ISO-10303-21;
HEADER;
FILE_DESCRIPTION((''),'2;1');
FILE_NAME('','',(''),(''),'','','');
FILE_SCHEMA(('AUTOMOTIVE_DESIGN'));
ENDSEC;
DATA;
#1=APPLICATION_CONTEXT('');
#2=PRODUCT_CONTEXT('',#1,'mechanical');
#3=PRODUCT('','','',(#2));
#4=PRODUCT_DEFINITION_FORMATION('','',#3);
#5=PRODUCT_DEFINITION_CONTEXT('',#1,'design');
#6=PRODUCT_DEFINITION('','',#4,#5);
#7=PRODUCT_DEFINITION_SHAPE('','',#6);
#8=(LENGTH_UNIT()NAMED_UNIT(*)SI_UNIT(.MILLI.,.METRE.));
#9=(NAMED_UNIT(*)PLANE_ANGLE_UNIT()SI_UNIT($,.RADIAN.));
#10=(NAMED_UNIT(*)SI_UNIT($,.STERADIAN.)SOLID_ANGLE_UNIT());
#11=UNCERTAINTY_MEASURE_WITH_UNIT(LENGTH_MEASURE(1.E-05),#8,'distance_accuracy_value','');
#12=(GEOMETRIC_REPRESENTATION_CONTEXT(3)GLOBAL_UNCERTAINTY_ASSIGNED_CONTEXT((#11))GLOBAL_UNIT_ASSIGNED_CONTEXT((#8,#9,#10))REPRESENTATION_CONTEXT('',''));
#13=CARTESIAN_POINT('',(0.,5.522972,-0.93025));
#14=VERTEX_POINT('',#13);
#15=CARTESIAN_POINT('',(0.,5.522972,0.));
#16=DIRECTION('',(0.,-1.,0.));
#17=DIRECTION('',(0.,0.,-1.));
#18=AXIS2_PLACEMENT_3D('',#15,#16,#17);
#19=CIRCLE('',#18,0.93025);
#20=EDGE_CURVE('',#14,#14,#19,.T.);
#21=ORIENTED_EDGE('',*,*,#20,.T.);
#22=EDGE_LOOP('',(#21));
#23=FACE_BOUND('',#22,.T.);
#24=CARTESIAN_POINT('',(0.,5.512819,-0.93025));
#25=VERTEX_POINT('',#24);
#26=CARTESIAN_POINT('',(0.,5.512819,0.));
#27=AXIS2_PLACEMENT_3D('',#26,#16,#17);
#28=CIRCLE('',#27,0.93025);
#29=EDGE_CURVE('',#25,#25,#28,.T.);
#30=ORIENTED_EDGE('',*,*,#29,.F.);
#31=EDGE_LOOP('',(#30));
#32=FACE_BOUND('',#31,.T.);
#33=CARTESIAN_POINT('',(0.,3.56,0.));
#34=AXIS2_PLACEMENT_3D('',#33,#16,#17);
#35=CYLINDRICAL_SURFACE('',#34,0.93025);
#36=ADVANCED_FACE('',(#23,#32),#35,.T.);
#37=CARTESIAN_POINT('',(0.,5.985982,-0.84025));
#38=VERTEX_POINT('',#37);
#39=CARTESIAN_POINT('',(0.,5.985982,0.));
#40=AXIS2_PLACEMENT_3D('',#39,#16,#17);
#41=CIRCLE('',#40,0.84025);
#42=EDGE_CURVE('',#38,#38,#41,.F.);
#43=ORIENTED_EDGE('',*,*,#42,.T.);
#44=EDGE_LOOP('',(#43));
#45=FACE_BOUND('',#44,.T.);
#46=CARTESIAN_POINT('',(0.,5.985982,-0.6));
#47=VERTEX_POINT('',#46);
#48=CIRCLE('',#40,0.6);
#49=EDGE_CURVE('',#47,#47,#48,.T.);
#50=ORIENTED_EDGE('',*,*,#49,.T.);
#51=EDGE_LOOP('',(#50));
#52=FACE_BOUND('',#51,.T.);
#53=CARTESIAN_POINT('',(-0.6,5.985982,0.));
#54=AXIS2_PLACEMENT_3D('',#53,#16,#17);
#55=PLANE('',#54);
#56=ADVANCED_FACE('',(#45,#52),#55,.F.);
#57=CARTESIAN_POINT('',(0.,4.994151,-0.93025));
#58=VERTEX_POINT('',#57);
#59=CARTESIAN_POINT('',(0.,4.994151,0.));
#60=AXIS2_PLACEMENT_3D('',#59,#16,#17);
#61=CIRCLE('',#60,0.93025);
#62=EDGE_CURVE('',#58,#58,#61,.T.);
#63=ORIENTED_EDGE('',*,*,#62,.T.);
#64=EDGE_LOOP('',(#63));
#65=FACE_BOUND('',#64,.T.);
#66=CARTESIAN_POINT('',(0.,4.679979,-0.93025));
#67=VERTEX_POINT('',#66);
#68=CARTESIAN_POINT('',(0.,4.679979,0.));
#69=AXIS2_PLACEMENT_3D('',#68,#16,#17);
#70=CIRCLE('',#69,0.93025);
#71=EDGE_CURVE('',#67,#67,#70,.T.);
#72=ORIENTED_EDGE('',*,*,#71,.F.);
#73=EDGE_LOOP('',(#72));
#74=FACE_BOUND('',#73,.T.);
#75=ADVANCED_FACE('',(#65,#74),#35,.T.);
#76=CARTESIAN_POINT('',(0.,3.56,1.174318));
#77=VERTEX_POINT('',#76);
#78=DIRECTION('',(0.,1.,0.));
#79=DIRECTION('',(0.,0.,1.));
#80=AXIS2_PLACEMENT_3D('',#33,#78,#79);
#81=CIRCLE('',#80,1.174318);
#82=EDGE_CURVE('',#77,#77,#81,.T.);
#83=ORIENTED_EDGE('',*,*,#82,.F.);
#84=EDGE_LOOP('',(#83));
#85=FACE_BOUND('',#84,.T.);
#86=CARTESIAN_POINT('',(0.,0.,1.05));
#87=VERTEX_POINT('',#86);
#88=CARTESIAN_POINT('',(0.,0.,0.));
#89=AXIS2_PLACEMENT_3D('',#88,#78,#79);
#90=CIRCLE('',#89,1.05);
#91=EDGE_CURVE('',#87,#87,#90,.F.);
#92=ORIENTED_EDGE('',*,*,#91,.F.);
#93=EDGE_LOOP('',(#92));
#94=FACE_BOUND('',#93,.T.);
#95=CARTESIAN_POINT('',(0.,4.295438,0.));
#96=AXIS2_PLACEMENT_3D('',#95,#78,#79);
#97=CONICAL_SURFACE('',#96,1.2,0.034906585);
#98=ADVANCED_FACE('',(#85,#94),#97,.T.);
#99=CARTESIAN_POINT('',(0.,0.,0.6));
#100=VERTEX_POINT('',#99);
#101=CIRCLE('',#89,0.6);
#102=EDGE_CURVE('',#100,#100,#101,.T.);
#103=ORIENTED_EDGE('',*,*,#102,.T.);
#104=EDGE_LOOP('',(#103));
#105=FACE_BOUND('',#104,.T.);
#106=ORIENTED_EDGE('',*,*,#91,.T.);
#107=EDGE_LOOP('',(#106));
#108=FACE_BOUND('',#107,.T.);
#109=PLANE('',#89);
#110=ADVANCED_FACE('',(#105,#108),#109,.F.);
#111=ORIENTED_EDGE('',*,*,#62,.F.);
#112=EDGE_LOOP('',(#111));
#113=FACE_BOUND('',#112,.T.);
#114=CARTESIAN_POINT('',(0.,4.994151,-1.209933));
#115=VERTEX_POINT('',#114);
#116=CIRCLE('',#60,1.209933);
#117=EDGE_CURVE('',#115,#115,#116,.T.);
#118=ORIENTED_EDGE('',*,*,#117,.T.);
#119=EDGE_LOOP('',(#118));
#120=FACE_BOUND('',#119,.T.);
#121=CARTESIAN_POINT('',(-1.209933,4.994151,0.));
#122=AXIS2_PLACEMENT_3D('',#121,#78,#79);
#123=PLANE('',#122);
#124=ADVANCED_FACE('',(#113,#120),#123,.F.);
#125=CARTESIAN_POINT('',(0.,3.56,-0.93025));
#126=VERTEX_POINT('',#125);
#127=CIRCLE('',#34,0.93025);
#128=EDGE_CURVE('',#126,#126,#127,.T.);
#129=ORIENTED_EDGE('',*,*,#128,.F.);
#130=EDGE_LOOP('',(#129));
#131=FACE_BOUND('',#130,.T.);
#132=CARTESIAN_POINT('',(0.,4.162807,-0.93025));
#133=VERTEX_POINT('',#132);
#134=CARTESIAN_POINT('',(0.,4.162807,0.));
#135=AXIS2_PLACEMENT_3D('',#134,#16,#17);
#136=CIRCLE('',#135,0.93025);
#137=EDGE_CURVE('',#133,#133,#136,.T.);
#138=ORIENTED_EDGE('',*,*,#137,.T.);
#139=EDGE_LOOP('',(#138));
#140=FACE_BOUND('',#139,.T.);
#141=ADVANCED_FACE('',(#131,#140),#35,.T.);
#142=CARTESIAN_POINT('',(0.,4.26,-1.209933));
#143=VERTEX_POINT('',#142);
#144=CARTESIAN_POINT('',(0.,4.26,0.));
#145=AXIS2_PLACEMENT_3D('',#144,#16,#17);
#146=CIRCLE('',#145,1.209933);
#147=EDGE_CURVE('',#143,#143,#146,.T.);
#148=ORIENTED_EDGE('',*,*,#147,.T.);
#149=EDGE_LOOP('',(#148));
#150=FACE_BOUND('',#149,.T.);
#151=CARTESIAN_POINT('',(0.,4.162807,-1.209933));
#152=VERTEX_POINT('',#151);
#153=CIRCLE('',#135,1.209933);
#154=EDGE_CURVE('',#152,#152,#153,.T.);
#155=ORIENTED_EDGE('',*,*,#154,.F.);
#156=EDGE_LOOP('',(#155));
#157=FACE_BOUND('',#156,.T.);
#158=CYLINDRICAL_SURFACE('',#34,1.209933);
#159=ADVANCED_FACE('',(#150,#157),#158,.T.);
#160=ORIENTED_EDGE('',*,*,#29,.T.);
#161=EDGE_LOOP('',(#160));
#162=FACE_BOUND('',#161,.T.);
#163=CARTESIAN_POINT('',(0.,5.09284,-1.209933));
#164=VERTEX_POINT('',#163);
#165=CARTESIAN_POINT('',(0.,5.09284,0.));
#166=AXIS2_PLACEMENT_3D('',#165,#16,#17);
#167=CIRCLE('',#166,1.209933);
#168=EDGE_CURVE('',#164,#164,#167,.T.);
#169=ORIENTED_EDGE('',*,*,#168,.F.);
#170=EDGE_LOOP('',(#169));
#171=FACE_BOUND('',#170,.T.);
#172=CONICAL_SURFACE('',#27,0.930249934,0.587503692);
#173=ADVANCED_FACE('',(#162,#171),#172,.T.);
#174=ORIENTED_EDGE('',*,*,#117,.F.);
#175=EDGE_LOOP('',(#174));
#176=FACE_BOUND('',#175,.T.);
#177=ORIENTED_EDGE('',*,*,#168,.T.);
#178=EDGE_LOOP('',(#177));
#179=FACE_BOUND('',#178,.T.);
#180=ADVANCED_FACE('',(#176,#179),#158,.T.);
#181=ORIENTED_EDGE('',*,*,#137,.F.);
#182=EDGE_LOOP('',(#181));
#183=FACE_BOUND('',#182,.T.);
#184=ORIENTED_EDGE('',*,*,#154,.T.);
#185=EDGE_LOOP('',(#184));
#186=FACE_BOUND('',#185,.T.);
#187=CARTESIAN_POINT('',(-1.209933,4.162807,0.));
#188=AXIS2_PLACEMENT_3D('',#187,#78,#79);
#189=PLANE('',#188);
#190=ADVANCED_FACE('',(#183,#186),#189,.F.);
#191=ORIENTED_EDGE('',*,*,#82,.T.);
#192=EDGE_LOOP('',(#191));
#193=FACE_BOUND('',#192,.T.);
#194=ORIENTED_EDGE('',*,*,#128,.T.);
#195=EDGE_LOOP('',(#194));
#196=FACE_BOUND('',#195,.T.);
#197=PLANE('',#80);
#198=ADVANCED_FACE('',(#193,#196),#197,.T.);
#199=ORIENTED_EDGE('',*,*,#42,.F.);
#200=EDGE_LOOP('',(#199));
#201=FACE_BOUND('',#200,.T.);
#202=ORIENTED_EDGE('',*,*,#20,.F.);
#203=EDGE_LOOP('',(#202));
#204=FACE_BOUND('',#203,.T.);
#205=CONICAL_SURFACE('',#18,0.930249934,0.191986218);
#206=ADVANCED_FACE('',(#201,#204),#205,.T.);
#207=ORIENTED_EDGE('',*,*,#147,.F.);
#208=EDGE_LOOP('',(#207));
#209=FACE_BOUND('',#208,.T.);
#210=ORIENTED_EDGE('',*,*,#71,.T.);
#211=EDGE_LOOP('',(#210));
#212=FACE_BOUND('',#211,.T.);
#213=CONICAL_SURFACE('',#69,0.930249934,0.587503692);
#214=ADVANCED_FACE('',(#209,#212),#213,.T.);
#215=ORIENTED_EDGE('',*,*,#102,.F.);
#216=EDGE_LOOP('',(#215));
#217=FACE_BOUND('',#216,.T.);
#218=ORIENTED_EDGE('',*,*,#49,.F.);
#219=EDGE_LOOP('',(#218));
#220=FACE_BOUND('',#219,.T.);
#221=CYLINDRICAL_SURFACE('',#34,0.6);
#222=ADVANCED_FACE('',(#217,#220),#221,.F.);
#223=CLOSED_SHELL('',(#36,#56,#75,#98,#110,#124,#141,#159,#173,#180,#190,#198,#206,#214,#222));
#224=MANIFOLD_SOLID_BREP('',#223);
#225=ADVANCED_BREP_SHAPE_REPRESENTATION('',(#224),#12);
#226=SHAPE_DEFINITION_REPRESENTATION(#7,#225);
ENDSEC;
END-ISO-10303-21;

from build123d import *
from build123d.topology import SkipClean

# Parameters (mm, degrees)
SKETCH1_R           = 1.2
SKETCH1_R_2         = 0.6
BOSS_EXTRUDE1_DEPTH = 3.56
CHAMFER1_SIZE       = 4.295437992
CHAMFER1_SIZE_2     = 0.15
CHAMFER2_SIZE       = 0.09
CHAMFER2_SIZE2      = 0.463009861


with BuildPart() as part:
    # Sketch1 → Boss-Extrude1 (new body)
    with BuildSketch(Plane(origin=(0, 0, 0), x_dir=(1, 0, 0), z_dir=(0, 1, 0))):
        with Locations(Location((0, 0, 0), (0, 0, 270))):
            Circle(SKETCH1_R)
        with Locations(Location((0, 0, 0), (0, 0, 270))):
            Circle(SKETCH1_R_2, mode=Mode.SUBTRACT)
    extrude(amount=BOSS_EXTRUDE1_DEPTH)

    # Chamfer1
    # the kernel refuses this chamfer: 4.295437992, 0.15 mm, written as the material it takes off along each edge
    with BuildSketch(Plane(origin=(0, 0, 0), x_dir=(0, 0, 1), z_dir=(-1, 0, 0))) as chamfer1_piece_1:
        Polygon((1.2, CHAMFER1_SIZE), (1.2 - CHAMFER1_SIZE_2, 0), (1.2, 0), align=None)
    revolve(axis=Axis((0, 0, 0), (0, 1, 0)), mode=Mode.SUBTRACT)

    # Sketch2 → Revolve1 (revolve)
    with SkipClean():  # the faces are left unmerged after this step: merging them gives an invalid solid
        with BuildSketch(Plane.XY, mode=Mode.PRIVATE) as revolve1_sk:
            Polygon((-0.930249934, 3.56), (-0.6, 3.56), (-0.6, 5.985981573), (-0.930249934, 5.985981573), (-0.930249934, 5.512818609), (-1.209933354, 5.092839643), (-1.209933354, 4.994150585), (-0.930249934, 4.994150585), (-0.930249934, 4.679978965), (-1.209933354, 4.26), (-1.209933354, 4.162806989), (-0.930249934, 4.162806989), align=None)
        revolve(revolve1_sk.sketch.rotate(Axis((0, 3.56, 0), (0, 1, 0)), 270), axis=Axis((0, 3.56, 0), (0, 1, 0)))
    add(part.part.scale(1), mode=Mode.REPLACE)  # the faces are merged on a copy

    # Chamfer2
    chamfer2_edges = [part.edges().sort_by_distance(p)[0] for p in [
        (0, 5.985981573, 0.930249934),
    ]]
    chamfer2_side = [part.faces().sort_by_distance(p)[0] for p in [
        (0, 5.985981573, 0.626311441),
    ]]
    chamfer(chamfer2_edges, length=CHAMFER2_SIZE, length2=CHAMFER2_SIZE2, reference=chamfer2_side[0])


solid = part.part
